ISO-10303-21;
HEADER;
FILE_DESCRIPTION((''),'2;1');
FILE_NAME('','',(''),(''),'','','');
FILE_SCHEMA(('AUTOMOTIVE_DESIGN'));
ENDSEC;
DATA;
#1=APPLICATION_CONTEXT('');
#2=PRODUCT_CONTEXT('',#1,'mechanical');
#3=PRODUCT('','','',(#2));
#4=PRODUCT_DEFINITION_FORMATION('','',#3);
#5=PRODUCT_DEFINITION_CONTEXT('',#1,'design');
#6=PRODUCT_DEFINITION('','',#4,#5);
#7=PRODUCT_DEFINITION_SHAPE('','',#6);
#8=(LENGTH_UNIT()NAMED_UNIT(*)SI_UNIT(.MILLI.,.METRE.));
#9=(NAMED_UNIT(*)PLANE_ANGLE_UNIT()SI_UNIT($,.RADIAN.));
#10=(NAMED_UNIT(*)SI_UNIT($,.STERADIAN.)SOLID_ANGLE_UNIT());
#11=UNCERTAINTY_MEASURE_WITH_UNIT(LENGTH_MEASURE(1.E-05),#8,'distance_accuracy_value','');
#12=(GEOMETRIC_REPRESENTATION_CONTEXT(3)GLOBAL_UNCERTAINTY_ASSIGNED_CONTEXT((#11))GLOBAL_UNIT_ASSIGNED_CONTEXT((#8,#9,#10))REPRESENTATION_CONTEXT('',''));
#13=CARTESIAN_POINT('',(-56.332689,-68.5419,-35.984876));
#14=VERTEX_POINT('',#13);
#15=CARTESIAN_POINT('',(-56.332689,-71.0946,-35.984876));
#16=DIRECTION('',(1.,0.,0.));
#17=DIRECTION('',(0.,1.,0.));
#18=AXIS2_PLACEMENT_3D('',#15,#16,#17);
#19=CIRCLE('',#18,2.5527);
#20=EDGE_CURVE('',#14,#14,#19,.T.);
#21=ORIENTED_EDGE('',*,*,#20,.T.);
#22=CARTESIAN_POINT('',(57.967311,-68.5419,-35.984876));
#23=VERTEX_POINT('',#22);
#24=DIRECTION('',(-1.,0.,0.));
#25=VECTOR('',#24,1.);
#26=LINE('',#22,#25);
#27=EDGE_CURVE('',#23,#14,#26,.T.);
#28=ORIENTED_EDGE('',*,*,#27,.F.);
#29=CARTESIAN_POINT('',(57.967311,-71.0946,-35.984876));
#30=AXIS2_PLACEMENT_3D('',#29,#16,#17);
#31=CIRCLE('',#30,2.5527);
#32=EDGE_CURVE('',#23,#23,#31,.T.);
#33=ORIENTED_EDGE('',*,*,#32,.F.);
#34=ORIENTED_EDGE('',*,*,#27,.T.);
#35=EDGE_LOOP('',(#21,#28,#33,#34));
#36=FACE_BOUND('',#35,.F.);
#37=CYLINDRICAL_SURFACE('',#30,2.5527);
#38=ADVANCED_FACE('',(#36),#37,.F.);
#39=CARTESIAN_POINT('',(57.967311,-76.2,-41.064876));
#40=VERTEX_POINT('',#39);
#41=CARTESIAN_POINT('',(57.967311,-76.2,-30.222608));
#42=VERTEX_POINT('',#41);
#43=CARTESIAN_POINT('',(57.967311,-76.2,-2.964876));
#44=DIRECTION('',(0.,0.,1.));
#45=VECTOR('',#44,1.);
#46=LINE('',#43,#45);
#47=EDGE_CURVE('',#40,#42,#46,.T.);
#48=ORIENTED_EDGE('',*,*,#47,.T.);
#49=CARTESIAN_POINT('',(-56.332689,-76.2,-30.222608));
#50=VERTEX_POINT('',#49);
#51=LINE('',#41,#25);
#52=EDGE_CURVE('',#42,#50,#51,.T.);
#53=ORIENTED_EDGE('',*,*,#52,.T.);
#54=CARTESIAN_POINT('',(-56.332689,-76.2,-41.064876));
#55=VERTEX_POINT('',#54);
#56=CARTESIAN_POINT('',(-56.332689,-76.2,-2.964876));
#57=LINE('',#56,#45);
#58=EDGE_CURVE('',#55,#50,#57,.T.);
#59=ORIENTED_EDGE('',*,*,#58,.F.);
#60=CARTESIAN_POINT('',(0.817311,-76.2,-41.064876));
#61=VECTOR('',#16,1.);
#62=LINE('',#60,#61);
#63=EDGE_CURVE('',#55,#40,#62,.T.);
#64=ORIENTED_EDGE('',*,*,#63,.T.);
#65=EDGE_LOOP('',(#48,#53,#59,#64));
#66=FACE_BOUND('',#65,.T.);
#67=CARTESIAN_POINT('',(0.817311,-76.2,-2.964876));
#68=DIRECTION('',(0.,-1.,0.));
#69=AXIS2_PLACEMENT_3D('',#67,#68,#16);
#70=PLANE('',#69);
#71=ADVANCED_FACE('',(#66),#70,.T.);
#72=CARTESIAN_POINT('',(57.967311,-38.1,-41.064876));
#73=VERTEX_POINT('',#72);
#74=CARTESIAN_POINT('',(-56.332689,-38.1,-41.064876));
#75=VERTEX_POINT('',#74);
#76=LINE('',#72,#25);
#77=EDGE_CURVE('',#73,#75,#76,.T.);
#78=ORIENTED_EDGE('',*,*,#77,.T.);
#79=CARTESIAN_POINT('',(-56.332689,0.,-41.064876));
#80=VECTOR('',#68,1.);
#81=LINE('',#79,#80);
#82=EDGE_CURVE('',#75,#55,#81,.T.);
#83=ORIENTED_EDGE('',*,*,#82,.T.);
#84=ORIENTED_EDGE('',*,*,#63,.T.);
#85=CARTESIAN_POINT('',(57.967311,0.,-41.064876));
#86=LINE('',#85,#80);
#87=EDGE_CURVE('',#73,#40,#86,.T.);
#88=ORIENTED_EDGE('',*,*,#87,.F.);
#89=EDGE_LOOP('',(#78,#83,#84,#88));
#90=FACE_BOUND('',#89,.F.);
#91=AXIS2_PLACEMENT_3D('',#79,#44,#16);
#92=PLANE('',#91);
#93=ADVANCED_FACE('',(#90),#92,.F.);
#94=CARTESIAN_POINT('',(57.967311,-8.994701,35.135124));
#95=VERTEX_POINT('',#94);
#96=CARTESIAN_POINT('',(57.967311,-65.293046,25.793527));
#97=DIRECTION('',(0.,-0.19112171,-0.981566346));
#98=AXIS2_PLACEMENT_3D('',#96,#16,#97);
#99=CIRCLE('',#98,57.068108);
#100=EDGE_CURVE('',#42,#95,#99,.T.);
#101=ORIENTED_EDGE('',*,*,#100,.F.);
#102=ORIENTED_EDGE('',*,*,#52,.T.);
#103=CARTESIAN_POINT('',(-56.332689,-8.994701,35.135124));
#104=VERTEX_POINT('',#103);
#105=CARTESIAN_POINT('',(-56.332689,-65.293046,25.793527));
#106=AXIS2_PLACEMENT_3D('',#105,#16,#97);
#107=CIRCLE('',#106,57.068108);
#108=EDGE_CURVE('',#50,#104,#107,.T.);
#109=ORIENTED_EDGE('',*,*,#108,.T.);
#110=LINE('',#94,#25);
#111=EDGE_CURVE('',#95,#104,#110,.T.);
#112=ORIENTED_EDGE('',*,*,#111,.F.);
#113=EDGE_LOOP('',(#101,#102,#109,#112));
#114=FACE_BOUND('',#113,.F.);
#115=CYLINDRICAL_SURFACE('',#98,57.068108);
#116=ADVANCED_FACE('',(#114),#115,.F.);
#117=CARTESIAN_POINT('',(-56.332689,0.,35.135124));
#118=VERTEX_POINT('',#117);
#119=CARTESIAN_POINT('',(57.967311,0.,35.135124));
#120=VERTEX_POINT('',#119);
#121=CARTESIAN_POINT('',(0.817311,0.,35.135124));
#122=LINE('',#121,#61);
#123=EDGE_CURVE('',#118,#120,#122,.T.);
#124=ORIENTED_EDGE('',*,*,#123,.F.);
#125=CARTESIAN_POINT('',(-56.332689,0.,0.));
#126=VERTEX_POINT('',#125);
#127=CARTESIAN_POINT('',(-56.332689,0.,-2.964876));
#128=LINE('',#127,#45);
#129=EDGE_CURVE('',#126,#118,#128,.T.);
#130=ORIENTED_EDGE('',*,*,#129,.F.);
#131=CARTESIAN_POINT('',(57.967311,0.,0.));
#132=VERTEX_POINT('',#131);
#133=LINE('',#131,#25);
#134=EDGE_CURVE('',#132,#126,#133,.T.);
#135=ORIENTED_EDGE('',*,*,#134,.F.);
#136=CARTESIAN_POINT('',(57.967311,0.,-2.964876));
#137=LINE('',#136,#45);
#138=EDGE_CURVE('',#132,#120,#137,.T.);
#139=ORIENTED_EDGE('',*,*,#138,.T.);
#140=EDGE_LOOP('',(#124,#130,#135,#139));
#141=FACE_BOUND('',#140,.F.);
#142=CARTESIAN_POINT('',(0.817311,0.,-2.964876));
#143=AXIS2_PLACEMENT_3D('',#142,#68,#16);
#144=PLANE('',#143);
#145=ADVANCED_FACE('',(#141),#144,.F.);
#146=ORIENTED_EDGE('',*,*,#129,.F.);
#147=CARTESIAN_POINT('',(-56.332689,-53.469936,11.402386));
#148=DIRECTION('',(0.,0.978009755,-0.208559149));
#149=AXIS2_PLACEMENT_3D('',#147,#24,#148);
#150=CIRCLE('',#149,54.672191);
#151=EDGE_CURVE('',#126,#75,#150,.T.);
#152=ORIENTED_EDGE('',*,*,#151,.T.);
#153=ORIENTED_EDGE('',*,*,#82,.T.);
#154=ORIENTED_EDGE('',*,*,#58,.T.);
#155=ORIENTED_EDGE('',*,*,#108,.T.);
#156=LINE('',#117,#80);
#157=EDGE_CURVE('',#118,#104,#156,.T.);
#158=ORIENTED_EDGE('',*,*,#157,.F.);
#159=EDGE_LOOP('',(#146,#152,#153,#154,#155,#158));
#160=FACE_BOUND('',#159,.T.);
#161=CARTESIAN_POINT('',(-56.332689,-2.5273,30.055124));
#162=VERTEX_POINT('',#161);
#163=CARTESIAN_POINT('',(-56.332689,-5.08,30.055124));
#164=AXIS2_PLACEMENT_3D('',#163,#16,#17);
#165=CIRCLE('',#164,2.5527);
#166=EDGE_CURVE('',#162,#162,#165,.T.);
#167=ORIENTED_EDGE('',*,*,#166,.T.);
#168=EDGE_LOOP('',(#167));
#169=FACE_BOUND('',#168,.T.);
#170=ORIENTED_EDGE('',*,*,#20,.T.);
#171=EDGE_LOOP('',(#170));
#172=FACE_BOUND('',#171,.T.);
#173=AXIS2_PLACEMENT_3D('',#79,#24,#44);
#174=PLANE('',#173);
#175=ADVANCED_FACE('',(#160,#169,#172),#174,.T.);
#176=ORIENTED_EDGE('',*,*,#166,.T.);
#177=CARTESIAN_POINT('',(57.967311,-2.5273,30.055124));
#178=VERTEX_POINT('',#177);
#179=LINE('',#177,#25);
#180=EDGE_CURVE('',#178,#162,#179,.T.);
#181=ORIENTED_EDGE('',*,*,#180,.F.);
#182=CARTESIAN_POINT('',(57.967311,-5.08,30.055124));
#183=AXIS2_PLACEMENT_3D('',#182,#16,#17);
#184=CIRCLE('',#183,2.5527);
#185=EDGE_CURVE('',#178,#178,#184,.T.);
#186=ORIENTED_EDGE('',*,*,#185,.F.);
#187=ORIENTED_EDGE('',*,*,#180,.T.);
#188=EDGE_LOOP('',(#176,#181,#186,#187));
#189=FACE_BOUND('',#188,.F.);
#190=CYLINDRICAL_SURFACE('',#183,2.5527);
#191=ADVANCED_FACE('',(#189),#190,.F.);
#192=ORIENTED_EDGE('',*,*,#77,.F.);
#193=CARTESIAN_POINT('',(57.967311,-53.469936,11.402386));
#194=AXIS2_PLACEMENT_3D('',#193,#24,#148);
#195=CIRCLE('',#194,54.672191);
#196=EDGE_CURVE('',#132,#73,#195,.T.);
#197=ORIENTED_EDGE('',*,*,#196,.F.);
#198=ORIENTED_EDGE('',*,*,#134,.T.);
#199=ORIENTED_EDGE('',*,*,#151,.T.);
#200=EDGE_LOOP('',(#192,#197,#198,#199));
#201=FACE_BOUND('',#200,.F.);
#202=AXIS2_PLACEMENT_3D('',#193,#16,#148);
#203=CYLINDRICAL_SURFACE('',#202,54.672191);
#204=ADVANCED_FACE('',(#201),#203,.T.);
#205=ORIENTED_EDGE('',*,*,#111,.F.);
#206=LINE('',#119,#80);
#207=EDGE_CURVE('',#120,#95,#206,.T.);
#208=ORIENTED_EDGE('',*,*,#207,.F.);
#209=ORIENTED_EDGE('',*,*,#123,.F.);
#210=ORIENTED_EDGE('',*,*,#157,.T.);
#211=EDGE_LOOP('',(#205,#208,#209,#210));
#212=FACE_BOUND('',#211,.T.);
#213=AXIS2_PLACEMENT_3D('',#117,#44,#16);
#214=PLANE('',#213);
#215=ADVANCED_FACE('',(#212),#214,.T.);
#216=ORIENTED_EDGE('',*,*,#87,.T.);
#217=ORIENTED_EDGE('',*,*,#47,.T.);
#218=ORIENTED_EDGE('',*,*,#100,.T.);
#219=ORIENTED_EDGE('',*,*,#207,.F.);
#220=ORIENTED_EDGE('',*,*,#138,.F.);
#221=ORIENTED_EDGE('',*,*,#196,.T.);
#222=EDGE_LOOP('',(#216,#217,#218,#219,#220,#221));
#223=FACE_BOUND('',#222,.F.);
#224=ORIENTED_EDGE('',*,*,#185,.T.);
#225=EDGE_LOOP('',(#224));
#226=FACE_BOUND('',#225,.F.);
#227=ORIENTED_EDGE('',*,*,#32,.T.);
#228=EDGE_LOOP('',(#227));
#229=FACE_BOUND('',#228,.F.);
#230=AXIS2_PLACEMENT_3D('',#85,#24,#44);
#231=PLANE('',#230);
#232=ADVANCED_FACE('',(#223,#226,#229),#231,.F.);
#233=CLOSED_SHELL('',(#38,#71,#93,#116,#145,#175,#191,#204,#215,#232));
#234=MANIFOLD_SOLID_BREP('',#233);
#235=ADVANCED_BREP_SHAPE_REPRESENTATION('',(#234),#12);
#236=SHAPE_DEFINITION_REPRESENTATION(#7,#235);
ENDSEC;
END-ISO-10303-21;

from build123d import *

# Parameters (mm, degrees)
F0_W     = 114.3
F0_H     = 76.2
F1_DEPTH = 76.2
F2_R     = 2.5527
F3_DEPTH = 114.3


# Not quite as in the source:
# - a feature names something its author has since deleted; it is built from what else it names


with BuildPart() as f1:
    # F0 (on Front) → F1 (new body)
    with BuildSketch(Plane.XZ):
        with Locations((0.8173113427, -2.9648756608)):
            Rectangle(F0_W, F0_H)
    extrude(amount=F1_DEPTH)

    # F2 (on face) → F3 (cut)
    with BuildSketch(Plane.YZ.offset(57.9673113427)):
        with Locations((-71.0946, -35.9848756608)):
            Circle(F2_R)
        with Locations((-5.08, 30.0551243392)):
            Circle(F2_R)
        with BuildLine():
            ThreePointArc((0, 0), (-13.3911011826, -25.7827653055), (-38.1, -41.0648756608))
            Line((-38.1, -41.0648756608), (0, -41.0648756608))
            Line((0, -41.0648756608), (0, 0))
        make_face()
        with BuildLine():
            Line((-76.2, 35.1351243392), (-76.2, -30.2226077765))
            ThreePointArc((-76.2, -30.2226077765), (-25.506077145, -15.1181602946), (-8.9947013184, 35.1351243392))
            Line((-8.9947013184, 35.1351243392), (-76.2, 35.1351243392))
        make_face()
    extrude(amount=-F3_DEPTH, mode=Mode.SUBTRACT)


solid = f1.part
